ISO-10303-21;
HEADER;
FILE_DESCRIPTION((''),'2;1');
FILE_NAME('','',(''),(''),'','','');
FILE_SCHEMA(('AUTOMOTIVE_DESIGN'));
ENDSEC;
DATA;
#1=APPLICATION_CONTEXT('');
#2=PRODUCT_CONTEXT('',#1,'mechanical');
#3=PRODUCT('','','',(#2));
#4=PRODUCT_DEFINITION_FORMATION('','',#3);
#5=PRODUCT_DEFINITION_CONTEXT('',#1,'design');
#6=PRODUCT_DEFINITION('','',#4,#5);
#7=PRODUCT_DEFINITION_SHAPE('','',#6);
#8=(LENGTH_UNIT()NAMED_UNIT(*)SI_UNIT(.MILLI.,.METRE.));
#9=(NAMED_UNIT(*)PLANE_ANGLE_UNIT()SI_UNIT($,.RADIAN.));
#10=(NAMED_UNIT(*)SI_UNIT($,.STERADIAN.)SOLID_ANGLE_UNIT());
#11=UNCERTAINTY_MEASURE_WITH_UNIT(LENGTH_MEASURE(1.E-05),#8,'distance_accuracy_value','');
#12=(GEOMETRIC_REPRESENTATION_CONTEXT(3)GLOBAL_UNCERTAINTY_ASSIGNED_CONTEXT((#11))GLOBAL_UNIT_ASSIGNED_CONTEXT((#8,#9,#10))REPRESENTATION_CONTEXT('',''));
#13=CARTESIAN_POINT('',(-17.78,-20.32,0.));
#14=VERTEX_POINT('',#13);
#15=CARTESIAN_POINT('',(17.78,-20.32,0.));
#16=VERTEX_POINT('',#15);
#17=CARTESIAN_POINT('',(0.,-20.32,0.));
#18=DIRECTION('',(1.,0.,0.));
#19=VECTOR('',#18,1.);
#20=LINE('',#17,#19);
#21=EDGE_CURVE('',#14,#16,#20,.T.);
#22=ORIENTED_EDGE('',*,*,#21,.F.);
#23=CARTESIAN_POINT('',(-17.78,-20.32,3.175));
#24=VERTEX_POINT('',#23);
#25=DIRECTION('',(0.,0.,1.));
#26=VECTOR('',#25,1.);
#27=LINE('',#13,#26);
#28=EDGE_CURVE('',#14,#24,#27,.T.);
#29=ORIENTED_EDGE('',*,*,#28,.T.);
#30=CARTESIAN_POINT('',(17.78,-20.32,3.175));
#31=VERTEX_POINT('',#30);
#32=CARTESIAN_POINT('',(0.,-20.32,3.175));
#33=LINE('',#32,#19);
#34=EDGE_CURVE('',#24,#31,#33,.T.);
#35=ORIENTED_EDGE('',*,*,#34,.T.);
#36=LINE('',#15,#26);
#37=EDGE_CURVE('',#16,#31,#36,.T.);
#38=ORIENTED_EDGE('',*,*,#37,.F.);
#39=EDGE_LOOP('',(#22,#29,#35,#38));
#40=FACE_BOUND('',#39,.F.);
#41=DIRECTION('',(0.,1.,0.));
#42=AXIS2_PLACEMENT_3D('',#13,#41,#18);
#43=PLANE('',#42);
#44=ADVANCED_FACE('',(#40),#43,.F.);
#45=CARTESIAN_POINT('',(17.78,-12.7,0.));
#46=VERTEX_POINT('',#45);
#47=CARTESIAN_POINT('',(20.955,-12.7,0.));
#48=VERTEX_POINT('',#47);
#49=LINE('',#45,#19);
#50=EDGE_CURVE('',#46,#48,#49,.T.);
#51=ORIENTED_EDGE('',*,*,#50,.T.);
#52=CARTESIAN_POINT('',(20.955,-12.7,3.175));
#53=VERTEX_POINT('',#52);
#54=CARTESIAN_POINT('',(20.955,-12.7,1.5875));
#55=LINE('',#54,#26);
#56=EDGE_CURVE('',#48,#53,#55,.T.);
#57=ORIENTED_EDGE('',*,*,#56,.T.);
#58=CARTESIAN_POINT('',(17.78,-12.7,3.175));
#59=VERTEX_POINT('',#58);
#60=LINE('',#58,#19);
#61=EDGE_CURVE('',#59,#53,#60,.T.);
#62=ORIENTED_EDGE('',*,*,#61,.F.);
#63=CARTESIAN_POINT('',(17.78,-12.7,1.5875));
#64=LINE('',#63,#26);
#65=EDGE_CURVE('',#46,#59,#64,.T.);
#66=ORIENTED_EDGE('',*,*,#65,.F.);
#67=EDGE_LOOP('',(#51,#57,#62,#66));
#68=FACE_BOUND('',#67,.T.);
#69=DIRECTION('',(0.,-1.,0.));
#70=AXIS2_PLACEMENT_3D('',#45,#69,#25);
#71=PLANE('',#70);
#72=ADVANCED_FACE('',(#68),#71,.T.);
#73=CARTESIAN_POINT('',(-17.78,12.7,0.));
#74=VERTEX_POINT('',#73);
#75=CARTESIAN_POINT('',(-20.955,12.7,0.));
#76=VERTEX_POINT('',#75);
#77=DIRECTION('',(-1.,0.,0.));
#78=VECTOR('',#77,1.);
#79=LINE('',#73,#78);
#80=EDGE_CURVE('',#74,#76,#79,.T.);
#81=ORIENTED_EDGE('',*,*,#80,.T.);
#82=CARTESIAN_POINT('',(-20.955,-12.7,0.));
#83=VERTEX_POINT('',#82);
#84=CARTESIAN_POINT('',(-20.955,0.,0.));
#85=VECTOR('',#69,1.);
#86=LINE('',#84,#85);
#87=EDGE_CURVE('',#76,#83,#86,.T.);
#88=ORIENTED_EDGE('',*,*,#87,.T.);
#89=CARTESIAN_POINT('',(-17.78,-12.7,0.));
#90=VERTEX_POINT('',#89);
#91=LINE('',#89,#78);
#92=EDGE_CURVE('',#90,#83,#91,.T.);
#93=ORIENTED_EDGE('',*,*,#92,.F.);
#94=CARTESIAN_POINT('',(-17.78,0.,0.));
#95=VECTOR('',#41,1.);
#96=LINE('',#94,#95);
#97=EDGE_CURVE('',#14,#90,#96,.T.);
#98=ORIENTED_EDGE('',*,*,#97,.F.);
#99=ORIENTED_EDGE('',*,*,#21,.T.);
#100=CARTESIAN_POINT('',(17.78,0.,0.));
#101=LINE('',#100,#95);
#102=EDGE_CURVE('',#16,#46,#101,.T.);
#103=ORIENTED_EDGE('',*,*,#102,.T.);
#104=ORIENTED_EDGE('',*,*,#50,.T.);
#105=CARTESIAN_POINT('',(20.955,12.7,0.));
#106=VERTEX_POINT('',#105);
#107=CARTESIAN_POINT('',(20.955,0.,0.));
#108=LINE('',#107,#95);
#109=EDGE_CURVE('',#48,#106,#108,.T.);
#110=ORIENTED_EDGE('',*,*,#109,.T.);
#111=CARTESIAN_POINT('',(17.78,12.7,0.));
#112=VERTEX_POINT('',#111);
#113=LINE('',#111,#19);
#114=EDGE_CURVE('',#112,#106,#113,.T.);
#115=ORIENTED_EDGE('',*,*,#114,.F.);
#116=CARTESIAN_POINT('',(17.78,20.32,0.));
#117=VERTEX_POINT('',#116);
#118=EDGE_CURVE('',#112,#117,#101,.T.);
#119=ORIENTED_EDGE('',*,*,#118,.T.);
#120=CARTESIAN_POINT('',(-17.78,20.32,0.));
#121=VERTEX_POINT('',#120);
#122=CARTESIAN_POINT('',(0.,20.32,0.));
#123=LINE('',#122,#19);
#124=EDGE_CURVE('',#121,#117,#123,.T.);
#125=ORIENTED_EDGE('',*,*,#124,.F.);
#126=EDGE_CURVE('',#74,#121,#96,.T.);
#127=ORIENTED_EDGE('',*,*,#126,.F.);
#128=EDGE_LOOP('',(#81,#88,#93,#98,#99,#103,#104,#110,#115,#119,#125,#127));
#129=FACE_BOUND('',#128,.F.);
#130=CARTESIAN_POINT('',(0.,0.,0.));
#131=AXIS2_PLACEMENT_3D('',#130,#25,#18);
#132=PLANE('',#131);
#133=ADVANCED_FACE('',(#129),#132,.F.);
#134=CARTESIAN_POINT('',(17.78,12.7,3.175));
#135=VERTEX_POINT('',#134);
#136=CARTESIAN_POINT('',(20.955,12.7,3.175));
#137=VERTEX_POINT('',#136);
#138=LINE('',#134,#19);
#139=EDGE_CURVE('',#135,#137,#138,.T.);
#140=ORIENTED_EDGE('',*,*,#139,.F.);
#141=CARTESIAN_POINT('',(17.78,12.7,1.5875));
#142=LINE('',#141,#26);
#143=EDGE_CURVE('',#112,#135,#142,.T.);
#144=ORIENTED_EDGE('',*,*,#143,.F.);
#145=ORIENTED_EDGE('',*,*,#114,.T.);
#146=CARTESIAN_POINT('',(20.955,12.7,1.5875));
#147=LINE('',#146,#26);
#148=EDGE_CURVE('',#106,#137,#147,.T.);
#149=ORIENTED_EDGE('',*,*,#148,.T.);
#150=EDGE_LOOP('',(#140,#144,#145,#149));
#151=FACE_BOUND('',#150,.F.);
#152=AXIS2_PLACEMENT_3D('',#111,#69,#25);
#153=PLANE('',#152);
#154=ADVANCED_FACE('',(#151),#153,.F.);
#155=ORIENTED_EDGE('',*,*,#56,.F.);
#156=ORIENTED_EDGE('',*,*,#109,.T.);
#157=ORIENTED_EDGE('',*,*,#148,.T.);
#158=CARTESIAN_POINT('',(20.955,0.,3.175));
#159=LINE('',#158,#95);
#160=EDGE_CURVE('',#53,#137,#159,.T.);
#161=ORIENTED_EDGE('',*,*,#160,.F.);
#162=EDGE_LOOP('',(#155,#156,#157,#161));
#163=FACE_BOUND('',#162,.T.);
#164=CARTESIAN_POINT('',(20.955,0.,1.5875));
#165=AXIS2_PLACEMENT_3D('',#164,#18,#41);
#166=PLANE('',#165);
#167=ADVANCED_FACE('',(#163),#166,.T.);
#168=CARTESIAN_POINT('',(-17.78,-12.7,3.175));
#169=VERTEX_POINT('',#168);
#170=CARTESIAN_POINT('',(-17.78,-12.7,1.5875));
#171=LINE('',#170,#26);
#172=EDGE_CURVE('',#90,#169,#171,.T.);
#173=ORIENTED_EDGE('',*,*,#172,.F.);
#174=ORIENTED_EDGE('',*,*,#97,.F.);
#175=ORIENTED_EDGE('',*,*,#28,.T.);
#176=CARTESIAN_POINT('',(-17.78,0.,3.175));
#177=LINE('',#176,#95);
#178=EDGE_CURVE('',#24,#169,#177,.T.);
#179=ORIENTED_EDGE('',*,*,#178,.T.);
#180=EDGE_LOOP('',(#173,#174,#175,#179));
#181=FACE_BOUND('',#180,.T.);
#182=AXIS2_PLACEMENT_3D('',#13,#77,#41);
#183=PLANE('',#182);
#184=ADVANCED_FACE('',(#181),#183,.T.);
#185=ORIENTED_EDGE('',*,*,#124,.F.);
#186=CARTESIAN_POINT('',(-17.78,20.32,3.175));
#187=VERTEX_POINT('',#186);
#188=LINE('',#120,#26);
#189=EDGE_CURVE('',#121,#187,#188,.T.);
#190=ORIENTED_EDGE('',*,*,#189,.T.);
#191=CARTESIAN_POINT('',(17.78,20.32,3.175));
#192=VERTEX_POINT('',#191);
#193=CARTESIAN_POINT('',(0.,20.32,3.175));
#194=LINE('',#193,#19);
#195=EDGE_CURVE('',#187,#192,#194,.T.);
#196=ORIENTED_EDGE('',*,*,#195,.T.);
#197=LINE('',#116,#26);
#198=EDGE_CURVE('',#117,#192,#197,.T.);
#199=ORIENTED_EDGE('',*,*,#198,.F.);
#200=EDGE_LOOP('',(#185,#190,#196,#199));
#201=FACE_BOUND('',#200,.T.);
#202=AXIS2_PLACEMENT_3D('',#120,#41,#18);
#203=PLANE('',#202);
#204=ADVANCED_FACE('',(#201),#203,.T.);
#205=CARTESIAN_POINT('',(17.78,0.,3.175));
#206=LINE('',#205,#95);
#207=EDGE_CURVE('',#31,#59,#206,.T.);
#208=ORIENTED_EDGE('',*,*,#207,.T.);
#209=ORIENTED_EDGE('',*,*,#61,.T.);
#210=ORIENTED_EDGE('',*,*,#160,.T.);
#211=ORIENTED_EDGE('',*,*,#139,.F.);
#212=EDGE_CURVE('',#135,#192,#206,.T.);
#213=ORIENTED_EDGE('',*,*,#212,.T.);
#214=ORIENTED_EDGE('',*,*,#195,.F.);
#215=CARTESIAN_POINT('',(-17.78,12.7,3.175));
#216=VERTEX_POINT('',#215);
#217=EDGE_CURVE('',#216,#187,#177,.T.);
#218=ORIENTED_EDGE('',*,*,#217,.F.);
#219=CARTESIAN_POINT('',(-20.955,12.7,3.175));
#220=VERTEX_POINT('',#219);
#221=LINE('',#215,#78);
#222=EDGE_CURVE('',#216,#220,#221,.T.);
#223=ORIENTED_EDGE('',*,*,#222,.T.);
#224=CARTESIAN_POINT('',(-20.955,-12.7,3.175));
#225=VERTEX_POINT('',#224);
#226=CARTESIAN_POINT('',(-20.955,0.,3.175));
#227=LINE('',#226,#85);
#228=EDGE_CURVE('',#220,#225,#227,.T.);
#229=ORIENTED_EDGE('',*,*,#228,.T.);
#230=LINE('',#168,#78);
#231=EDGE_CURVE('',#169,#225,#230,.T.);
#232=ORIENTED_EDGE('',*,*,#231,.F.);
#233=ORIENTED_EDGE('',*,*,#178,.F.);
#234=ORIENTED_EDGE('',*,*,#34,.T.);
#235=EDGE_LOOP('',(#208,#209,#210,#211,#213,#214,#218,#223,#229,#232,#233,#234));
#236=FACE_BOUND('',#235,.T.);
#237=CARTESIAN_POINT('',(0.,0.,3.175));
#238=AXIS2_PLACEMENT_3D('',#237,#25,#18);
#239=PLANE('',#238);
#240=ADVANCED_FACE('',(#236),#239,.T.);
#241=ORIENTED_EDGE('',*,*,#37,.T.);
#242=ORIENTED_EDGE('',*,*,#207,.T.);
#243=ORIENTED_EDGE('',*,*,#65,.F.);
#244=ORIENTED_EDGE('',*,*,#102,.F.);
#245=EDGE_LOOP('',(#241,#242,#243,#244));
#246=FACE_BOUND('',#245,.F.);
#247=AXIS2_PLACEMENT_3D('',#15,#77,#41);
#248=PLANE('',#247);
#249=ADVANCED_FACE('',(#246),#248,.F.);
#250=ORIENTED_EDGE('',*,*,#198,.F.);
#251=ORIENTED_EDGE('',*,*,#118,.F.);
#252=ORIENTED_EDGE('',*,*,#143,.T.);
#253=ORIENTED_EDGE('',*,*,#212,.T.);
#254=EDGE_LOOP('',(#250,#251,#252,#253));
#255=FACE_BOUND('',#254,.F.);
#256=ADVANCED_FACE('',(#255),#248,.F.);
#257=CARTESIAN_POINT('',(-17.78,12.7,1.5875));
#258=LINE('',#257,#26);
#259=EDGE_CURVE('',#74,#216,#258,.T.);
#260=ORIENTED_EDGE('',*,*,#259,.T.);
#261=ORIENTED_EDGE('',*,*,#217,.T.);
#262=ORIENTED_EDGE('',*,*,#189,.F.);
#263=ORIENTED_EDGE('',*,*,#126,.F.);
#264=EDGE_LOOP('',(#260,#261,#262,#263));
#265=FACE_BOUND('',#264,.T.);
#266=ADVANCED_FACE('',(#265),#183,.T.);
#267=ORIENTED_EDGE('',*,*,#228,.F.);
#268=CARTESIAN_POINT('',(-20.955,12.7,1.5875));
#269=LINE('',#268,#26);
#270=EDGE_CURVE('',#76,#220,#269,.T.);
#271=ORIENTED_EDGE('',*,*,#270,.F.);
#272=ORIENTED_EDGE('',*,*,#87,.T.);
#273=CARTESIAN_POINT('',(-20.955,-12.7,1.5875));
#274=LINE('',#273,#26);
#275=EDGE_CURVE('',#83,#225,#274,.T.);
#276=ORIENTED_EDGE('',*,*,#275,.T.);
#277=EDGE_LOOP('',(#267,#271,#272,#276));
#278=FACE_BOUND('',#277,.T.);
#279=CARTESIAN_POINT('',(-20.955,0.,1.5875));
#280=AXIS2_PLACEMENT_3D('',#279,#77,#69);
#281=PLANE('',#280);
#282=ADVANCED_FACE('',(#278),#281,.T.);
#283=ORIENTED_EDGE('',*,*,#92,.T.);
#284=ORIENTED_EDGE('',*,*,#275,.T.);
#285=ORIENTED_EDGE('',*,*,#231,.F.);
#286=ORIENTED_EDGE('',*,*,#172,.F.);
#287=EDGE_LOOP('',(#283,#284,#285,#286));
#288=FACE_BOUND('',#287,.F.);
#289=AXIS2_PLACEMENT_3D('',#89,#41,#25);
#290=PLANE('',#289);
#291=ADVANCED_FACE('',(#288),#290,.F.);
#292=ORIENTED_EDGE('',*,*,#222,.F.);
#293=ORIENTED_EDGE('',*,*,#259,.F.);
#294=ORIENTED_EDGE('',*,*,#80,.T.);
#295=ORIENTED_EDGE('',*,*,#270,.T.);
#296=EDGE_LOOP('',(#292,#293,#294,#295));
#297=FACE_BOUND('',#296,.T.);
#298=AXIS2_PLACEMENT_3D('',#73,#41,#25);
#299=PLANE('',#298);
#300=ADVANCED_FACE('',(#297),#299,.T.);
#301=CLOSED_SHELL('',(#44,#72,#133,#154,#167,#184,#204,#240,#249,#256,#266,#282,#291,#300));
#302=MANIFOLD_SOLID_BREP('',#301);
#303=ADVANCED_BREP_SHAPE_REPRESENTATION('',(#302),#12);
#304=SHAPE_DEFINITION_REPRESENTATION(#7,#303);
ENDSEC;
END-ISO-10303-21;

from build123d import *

# Parameters (mm, degrees)
F0_W     = 35.56
F0_H     = 40.64
F1_DEPTH = 3.175
F2_W     = 25.4
F2_H     = 3.175
F3_DEPTH = 3.175
F4_W     = 25.4
F4_H     = 3.175
F5_DEPTH = 3.175


# Not quite as in the source:
# - a length typed as a fraction of an inch, garbled in the dataset ("3 / 203.2 mm" for 3/8 in), is restored


with BuildPart() as f1:
    # F0 (on Top) → F1 (new body)
    with BuildSketch(Plane.XY):
        Rectangle(F0_W, F0_H)
    extrude(amount=F1_DEPTH)

    # F2 (on face) → F3 (join)
    with BuildSketch(Plane(origin=(-17.78, 0, 0), x_dir=(0, -1, 0), z_dir=(-1, 0, 0))):
        with Locations((0, 1.5875)):
            Rectangle(F2_W, F2_H)
    extrude(amount=F3_DEPTH)

    # F4 (on face) → F5 (join)
    with BuildSketch(Plane.YZ.offset(17.78)):
        with Locations((0, 1.5875)):
            Rectangle(F4_W, F4_H)
    extrude(amount=F5_DEPTH)


solid = f1.part
